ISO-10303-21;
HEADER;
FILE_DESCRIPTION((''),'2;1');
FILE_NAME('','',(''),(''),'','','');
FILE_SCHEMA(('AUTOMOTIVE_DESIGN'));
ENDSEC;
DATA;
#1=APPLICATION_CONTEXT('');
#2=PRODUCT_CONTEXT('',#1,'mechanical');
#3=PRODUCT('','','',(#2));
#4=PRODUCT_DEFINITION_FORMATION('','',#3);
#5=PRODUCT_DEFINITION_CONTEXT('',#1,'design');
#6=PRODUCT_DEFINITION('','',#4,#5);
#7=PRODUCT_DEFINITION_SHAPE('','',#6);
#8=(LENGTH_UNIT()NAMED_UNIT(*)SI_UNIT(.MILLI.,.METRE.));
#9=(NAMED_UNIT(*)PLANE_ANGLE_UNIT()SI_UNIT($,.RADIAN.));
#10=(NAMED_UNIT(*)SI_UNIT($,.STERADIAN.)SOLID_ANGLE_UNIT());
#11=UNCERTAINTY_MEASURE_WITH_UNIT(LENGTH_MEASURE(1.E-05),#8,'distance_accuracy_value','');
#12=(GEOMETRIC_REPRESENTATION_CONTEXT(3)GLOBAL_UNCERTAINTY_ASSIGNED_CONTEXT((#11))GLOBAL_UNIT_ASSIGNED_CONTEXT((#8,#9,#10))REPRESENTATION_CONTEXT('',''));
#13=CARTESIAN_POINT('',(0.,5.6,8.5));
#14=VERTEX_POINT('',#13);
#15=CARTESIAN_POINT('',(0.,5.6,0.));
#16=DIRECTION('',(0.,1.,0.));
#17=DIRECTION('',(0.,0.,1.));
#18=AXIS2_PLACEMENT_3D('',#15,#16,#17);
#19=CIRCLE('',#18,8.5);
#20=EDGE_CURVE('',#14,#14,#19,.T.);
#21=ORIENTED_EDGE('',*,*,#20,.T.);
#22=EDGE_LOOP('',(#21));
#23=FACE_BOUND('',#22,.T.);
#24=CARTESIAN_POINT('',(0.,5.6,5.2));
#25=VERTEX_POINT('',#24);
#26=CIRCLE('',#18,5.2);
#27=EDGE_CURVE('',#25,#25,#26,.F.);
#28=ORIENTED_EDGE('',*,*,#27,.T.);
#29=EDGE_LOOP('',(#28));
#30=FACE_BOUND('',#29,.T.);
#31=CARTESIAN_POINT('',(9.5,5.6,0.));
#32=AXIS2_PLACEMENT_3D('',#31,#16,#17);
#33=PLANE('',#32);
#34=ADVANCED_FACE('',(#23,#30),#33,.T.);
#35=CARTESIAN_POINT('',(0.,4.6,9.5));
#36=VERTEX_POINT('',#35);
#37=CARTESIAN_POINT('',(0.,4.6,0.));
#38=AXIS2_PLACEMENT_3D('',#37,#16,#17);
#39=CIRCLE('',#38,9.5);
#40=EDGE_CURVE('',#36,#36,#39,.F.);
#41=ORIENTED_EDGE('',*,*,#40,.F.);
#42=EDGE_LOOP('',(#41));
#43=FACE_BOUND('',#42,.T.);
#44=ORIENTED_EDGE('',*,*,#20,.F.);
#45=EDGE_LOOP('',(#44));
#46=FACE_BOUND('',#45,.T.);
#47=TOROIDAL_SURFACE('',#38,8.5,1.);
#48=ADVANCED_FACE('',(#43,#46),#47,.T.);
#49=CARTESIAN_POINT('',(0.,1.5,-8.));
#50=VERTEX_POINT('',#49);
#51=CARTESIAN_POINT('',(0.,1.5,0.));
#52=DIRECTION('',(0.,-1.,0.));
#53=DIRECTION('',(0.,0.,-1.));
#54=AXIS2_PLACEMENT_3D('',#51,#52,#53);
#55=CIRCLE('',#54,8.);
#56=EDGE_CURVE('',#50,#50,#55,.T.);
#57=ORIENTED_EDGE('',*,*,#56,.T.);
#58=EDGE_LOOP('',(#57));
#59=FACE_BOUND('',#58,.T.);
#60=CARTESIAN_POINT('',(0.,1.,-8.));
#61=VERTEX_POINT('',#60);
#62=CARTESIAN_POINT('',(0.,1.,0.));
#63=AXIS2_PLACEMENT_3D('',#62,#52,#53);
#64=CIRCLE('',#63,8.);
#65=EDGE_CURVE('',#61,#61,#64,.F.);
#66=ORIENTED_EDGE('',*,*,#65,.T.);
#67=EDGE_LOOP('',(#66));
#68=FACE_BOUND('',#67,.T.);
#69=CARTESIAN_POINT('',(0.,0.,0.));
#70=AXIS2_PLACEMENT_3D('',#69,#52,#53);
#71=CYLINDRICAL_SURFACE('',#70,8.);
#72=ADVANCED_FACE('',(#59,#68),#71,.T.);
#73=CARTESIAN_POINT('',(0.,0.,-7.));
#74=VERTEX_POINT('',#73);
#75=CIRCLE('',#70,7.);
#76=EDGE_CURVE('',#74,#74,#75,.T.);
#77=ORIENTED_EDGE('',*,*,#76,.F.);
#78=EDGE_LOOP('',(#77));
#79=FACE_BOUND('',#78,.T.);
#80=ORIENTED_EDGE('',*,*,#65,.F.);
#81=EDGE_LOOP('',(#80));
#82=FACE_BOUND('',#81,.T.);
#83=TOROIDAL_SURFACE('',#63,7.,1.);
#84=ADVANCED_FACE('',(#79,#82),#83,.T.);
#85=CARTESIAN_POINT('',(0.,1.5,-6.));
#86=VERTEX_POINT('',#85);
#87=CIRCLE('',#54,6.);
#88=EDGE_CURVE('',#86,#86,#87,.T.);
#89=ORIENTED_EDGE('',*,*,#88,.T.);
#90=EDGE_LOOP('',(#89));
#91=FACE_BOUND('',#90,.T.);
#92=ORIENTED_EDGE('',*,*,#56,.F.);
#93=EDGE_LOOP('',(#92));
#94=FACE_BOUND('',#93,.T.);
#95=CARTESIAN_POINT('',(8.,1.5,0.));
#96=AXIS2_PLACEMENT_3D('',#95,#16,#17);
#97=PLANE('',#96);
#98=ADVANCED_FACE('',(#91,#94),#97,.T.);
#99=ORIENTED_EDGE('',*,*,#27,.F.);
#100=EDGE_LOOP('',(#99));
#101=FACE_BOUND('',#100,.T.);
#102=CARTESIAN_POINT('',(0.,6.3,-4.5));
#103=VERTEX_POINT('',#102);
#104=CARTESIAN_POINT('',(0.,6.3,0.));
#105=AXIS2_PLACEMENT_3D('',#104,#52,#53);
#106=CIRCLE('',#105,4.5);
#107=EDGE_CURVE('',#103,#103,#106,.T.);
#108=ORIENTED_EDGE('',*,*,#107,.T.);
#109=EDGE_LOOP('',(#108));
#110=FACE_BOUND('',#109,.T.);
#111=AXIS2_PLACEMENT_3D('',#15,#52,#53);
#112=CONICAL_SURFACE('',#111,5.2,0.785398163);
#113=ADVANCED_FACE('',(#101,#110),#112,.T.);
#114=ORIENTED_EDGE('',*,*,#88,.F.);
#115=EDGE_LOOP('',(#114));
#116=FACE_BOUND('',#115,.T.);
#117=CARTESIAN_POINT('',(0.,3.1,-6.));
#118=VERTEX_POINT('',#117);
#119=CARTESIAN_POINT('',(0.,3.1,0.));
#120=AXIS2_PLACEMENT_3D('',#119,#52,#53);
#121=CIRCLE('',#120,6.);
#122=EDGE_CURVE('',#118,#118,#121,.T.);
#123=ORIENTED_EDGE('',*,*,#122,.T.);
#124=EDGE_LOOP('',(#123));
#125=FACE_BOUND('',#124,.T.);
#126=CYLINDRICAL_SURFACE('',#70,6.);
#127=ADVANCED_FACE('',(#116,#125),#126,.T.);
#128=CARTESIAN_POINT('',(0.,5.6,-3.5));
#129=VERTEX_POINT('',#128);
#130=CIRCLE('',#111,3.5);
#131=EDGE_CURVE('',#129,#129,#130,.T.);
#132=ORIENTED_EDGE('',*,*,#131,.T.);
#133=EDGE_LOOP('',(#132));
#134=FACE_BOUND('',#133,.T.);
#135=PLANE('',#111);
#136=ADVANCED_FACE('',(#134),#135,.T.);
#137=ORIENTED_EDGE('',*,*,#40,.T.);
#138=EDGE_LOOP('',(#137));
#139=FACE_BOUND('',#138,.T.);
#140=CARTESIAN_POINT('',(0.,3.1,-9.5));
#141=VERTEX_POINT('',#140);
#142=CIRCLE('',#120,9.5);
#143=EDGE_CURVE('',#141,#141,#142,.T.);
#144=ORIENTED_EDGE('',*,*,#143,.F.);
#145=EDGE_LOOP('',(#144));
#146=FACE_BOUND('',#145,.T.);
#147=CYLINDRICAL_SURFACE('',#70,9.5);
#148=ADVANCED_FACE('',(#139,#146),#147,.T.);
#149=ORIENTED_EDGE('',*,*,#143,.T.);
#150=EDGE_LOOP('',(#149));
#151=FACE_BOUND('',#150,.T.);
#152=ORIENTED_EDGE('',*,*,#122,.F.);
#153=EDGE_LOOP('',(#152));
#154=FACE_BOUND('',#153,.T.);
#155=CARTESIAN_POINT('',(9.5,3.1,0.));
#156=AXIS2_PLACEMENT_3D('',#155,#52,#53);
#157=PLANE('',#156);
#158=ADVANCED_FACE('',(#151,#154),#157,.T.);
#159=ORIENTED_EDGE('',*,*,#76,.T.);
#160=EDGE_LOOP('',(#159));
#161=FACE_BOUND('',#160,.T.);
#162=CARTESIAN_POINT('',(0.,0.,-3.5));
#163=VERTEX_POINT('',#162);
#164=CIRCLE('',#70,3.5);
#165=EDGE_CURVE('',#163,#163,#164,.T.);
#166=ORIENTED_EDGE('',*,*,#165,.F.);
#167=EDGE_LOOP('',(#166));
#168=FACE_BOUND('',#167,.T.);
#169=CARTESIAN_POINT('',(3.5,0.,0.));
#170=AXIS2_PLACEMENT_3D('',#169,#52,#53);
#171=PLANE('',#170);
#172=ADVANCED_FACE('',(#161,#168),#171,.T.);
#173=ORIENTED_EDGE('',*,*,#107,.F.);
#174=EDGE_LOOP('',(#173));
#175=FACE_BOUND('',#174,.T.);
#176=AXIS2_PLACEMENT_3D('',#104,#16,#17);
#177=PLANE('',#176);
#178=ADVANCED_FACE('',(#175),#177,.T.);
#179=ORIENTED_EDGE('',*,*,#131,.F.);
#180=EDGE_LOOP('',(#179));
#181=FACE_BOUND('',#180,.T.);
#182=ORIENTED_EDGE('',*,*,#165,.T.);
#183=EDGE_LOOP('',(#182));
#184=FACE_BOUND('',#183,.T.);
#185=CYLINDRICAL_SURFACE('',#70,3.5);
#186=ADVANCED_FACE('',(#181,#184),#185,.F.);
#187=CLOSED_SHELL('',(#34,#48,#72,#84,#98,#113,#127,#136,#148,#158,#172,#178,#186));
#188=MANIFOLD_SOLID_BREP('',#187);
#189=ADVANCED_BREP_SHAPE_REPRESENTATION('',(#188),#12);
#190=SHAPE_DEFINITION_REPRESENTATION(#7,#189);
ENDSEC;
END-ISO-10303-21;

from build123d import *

# Parameters (mm, degrees)
FILLET_1_R     = 1
CHAMFER_1_SIZE = 0.7


with BuildPart() as part:
    # ｽｹｯﾁ1 → 回転1 (revolve)
    with BuildSketch(Plane.XY, mode=Mode.PRIVATE) as revolve_1_sk:
        Polygon((0, 6.3), (4.5, 6.3), (4.5, 5.6), (9.5, 5.6), (9.5, 3.1), (6, 3.1), (6, 1.5), (8, 1.5), (8, 0), (3.5, 0), (3.5, 5.6), (0, 5.6), align=None)
    revolve(revolve_1_sk.sketch.rotate(Axis((0, 0, 0), (0, 1, 0)), 90), axis=Axis((0, 0, 0), (0, 1, 0)))

    # ﾌｨﾚｯﾄ1
    fillet_1_edges = [part.edges().sort_by_distance(p)[0] for p in [
        (0, 0, 8),
        (0, 5.6, 9.5),
    ]]
    fillet(fillet_1_edges, radius=FILLET_1_R)

    # 面取り1
    chamfer_1_edges = [part.edges().sort_by_distance(p)[0] for p in [
        (0, 5.6, 4.5),
    ]]
    chamfer(chamfer_1_edges, length=CHAMFER_1_SIZE - 0.0001)  # a hair under: the kernel refuses the full size


solid = part.part
